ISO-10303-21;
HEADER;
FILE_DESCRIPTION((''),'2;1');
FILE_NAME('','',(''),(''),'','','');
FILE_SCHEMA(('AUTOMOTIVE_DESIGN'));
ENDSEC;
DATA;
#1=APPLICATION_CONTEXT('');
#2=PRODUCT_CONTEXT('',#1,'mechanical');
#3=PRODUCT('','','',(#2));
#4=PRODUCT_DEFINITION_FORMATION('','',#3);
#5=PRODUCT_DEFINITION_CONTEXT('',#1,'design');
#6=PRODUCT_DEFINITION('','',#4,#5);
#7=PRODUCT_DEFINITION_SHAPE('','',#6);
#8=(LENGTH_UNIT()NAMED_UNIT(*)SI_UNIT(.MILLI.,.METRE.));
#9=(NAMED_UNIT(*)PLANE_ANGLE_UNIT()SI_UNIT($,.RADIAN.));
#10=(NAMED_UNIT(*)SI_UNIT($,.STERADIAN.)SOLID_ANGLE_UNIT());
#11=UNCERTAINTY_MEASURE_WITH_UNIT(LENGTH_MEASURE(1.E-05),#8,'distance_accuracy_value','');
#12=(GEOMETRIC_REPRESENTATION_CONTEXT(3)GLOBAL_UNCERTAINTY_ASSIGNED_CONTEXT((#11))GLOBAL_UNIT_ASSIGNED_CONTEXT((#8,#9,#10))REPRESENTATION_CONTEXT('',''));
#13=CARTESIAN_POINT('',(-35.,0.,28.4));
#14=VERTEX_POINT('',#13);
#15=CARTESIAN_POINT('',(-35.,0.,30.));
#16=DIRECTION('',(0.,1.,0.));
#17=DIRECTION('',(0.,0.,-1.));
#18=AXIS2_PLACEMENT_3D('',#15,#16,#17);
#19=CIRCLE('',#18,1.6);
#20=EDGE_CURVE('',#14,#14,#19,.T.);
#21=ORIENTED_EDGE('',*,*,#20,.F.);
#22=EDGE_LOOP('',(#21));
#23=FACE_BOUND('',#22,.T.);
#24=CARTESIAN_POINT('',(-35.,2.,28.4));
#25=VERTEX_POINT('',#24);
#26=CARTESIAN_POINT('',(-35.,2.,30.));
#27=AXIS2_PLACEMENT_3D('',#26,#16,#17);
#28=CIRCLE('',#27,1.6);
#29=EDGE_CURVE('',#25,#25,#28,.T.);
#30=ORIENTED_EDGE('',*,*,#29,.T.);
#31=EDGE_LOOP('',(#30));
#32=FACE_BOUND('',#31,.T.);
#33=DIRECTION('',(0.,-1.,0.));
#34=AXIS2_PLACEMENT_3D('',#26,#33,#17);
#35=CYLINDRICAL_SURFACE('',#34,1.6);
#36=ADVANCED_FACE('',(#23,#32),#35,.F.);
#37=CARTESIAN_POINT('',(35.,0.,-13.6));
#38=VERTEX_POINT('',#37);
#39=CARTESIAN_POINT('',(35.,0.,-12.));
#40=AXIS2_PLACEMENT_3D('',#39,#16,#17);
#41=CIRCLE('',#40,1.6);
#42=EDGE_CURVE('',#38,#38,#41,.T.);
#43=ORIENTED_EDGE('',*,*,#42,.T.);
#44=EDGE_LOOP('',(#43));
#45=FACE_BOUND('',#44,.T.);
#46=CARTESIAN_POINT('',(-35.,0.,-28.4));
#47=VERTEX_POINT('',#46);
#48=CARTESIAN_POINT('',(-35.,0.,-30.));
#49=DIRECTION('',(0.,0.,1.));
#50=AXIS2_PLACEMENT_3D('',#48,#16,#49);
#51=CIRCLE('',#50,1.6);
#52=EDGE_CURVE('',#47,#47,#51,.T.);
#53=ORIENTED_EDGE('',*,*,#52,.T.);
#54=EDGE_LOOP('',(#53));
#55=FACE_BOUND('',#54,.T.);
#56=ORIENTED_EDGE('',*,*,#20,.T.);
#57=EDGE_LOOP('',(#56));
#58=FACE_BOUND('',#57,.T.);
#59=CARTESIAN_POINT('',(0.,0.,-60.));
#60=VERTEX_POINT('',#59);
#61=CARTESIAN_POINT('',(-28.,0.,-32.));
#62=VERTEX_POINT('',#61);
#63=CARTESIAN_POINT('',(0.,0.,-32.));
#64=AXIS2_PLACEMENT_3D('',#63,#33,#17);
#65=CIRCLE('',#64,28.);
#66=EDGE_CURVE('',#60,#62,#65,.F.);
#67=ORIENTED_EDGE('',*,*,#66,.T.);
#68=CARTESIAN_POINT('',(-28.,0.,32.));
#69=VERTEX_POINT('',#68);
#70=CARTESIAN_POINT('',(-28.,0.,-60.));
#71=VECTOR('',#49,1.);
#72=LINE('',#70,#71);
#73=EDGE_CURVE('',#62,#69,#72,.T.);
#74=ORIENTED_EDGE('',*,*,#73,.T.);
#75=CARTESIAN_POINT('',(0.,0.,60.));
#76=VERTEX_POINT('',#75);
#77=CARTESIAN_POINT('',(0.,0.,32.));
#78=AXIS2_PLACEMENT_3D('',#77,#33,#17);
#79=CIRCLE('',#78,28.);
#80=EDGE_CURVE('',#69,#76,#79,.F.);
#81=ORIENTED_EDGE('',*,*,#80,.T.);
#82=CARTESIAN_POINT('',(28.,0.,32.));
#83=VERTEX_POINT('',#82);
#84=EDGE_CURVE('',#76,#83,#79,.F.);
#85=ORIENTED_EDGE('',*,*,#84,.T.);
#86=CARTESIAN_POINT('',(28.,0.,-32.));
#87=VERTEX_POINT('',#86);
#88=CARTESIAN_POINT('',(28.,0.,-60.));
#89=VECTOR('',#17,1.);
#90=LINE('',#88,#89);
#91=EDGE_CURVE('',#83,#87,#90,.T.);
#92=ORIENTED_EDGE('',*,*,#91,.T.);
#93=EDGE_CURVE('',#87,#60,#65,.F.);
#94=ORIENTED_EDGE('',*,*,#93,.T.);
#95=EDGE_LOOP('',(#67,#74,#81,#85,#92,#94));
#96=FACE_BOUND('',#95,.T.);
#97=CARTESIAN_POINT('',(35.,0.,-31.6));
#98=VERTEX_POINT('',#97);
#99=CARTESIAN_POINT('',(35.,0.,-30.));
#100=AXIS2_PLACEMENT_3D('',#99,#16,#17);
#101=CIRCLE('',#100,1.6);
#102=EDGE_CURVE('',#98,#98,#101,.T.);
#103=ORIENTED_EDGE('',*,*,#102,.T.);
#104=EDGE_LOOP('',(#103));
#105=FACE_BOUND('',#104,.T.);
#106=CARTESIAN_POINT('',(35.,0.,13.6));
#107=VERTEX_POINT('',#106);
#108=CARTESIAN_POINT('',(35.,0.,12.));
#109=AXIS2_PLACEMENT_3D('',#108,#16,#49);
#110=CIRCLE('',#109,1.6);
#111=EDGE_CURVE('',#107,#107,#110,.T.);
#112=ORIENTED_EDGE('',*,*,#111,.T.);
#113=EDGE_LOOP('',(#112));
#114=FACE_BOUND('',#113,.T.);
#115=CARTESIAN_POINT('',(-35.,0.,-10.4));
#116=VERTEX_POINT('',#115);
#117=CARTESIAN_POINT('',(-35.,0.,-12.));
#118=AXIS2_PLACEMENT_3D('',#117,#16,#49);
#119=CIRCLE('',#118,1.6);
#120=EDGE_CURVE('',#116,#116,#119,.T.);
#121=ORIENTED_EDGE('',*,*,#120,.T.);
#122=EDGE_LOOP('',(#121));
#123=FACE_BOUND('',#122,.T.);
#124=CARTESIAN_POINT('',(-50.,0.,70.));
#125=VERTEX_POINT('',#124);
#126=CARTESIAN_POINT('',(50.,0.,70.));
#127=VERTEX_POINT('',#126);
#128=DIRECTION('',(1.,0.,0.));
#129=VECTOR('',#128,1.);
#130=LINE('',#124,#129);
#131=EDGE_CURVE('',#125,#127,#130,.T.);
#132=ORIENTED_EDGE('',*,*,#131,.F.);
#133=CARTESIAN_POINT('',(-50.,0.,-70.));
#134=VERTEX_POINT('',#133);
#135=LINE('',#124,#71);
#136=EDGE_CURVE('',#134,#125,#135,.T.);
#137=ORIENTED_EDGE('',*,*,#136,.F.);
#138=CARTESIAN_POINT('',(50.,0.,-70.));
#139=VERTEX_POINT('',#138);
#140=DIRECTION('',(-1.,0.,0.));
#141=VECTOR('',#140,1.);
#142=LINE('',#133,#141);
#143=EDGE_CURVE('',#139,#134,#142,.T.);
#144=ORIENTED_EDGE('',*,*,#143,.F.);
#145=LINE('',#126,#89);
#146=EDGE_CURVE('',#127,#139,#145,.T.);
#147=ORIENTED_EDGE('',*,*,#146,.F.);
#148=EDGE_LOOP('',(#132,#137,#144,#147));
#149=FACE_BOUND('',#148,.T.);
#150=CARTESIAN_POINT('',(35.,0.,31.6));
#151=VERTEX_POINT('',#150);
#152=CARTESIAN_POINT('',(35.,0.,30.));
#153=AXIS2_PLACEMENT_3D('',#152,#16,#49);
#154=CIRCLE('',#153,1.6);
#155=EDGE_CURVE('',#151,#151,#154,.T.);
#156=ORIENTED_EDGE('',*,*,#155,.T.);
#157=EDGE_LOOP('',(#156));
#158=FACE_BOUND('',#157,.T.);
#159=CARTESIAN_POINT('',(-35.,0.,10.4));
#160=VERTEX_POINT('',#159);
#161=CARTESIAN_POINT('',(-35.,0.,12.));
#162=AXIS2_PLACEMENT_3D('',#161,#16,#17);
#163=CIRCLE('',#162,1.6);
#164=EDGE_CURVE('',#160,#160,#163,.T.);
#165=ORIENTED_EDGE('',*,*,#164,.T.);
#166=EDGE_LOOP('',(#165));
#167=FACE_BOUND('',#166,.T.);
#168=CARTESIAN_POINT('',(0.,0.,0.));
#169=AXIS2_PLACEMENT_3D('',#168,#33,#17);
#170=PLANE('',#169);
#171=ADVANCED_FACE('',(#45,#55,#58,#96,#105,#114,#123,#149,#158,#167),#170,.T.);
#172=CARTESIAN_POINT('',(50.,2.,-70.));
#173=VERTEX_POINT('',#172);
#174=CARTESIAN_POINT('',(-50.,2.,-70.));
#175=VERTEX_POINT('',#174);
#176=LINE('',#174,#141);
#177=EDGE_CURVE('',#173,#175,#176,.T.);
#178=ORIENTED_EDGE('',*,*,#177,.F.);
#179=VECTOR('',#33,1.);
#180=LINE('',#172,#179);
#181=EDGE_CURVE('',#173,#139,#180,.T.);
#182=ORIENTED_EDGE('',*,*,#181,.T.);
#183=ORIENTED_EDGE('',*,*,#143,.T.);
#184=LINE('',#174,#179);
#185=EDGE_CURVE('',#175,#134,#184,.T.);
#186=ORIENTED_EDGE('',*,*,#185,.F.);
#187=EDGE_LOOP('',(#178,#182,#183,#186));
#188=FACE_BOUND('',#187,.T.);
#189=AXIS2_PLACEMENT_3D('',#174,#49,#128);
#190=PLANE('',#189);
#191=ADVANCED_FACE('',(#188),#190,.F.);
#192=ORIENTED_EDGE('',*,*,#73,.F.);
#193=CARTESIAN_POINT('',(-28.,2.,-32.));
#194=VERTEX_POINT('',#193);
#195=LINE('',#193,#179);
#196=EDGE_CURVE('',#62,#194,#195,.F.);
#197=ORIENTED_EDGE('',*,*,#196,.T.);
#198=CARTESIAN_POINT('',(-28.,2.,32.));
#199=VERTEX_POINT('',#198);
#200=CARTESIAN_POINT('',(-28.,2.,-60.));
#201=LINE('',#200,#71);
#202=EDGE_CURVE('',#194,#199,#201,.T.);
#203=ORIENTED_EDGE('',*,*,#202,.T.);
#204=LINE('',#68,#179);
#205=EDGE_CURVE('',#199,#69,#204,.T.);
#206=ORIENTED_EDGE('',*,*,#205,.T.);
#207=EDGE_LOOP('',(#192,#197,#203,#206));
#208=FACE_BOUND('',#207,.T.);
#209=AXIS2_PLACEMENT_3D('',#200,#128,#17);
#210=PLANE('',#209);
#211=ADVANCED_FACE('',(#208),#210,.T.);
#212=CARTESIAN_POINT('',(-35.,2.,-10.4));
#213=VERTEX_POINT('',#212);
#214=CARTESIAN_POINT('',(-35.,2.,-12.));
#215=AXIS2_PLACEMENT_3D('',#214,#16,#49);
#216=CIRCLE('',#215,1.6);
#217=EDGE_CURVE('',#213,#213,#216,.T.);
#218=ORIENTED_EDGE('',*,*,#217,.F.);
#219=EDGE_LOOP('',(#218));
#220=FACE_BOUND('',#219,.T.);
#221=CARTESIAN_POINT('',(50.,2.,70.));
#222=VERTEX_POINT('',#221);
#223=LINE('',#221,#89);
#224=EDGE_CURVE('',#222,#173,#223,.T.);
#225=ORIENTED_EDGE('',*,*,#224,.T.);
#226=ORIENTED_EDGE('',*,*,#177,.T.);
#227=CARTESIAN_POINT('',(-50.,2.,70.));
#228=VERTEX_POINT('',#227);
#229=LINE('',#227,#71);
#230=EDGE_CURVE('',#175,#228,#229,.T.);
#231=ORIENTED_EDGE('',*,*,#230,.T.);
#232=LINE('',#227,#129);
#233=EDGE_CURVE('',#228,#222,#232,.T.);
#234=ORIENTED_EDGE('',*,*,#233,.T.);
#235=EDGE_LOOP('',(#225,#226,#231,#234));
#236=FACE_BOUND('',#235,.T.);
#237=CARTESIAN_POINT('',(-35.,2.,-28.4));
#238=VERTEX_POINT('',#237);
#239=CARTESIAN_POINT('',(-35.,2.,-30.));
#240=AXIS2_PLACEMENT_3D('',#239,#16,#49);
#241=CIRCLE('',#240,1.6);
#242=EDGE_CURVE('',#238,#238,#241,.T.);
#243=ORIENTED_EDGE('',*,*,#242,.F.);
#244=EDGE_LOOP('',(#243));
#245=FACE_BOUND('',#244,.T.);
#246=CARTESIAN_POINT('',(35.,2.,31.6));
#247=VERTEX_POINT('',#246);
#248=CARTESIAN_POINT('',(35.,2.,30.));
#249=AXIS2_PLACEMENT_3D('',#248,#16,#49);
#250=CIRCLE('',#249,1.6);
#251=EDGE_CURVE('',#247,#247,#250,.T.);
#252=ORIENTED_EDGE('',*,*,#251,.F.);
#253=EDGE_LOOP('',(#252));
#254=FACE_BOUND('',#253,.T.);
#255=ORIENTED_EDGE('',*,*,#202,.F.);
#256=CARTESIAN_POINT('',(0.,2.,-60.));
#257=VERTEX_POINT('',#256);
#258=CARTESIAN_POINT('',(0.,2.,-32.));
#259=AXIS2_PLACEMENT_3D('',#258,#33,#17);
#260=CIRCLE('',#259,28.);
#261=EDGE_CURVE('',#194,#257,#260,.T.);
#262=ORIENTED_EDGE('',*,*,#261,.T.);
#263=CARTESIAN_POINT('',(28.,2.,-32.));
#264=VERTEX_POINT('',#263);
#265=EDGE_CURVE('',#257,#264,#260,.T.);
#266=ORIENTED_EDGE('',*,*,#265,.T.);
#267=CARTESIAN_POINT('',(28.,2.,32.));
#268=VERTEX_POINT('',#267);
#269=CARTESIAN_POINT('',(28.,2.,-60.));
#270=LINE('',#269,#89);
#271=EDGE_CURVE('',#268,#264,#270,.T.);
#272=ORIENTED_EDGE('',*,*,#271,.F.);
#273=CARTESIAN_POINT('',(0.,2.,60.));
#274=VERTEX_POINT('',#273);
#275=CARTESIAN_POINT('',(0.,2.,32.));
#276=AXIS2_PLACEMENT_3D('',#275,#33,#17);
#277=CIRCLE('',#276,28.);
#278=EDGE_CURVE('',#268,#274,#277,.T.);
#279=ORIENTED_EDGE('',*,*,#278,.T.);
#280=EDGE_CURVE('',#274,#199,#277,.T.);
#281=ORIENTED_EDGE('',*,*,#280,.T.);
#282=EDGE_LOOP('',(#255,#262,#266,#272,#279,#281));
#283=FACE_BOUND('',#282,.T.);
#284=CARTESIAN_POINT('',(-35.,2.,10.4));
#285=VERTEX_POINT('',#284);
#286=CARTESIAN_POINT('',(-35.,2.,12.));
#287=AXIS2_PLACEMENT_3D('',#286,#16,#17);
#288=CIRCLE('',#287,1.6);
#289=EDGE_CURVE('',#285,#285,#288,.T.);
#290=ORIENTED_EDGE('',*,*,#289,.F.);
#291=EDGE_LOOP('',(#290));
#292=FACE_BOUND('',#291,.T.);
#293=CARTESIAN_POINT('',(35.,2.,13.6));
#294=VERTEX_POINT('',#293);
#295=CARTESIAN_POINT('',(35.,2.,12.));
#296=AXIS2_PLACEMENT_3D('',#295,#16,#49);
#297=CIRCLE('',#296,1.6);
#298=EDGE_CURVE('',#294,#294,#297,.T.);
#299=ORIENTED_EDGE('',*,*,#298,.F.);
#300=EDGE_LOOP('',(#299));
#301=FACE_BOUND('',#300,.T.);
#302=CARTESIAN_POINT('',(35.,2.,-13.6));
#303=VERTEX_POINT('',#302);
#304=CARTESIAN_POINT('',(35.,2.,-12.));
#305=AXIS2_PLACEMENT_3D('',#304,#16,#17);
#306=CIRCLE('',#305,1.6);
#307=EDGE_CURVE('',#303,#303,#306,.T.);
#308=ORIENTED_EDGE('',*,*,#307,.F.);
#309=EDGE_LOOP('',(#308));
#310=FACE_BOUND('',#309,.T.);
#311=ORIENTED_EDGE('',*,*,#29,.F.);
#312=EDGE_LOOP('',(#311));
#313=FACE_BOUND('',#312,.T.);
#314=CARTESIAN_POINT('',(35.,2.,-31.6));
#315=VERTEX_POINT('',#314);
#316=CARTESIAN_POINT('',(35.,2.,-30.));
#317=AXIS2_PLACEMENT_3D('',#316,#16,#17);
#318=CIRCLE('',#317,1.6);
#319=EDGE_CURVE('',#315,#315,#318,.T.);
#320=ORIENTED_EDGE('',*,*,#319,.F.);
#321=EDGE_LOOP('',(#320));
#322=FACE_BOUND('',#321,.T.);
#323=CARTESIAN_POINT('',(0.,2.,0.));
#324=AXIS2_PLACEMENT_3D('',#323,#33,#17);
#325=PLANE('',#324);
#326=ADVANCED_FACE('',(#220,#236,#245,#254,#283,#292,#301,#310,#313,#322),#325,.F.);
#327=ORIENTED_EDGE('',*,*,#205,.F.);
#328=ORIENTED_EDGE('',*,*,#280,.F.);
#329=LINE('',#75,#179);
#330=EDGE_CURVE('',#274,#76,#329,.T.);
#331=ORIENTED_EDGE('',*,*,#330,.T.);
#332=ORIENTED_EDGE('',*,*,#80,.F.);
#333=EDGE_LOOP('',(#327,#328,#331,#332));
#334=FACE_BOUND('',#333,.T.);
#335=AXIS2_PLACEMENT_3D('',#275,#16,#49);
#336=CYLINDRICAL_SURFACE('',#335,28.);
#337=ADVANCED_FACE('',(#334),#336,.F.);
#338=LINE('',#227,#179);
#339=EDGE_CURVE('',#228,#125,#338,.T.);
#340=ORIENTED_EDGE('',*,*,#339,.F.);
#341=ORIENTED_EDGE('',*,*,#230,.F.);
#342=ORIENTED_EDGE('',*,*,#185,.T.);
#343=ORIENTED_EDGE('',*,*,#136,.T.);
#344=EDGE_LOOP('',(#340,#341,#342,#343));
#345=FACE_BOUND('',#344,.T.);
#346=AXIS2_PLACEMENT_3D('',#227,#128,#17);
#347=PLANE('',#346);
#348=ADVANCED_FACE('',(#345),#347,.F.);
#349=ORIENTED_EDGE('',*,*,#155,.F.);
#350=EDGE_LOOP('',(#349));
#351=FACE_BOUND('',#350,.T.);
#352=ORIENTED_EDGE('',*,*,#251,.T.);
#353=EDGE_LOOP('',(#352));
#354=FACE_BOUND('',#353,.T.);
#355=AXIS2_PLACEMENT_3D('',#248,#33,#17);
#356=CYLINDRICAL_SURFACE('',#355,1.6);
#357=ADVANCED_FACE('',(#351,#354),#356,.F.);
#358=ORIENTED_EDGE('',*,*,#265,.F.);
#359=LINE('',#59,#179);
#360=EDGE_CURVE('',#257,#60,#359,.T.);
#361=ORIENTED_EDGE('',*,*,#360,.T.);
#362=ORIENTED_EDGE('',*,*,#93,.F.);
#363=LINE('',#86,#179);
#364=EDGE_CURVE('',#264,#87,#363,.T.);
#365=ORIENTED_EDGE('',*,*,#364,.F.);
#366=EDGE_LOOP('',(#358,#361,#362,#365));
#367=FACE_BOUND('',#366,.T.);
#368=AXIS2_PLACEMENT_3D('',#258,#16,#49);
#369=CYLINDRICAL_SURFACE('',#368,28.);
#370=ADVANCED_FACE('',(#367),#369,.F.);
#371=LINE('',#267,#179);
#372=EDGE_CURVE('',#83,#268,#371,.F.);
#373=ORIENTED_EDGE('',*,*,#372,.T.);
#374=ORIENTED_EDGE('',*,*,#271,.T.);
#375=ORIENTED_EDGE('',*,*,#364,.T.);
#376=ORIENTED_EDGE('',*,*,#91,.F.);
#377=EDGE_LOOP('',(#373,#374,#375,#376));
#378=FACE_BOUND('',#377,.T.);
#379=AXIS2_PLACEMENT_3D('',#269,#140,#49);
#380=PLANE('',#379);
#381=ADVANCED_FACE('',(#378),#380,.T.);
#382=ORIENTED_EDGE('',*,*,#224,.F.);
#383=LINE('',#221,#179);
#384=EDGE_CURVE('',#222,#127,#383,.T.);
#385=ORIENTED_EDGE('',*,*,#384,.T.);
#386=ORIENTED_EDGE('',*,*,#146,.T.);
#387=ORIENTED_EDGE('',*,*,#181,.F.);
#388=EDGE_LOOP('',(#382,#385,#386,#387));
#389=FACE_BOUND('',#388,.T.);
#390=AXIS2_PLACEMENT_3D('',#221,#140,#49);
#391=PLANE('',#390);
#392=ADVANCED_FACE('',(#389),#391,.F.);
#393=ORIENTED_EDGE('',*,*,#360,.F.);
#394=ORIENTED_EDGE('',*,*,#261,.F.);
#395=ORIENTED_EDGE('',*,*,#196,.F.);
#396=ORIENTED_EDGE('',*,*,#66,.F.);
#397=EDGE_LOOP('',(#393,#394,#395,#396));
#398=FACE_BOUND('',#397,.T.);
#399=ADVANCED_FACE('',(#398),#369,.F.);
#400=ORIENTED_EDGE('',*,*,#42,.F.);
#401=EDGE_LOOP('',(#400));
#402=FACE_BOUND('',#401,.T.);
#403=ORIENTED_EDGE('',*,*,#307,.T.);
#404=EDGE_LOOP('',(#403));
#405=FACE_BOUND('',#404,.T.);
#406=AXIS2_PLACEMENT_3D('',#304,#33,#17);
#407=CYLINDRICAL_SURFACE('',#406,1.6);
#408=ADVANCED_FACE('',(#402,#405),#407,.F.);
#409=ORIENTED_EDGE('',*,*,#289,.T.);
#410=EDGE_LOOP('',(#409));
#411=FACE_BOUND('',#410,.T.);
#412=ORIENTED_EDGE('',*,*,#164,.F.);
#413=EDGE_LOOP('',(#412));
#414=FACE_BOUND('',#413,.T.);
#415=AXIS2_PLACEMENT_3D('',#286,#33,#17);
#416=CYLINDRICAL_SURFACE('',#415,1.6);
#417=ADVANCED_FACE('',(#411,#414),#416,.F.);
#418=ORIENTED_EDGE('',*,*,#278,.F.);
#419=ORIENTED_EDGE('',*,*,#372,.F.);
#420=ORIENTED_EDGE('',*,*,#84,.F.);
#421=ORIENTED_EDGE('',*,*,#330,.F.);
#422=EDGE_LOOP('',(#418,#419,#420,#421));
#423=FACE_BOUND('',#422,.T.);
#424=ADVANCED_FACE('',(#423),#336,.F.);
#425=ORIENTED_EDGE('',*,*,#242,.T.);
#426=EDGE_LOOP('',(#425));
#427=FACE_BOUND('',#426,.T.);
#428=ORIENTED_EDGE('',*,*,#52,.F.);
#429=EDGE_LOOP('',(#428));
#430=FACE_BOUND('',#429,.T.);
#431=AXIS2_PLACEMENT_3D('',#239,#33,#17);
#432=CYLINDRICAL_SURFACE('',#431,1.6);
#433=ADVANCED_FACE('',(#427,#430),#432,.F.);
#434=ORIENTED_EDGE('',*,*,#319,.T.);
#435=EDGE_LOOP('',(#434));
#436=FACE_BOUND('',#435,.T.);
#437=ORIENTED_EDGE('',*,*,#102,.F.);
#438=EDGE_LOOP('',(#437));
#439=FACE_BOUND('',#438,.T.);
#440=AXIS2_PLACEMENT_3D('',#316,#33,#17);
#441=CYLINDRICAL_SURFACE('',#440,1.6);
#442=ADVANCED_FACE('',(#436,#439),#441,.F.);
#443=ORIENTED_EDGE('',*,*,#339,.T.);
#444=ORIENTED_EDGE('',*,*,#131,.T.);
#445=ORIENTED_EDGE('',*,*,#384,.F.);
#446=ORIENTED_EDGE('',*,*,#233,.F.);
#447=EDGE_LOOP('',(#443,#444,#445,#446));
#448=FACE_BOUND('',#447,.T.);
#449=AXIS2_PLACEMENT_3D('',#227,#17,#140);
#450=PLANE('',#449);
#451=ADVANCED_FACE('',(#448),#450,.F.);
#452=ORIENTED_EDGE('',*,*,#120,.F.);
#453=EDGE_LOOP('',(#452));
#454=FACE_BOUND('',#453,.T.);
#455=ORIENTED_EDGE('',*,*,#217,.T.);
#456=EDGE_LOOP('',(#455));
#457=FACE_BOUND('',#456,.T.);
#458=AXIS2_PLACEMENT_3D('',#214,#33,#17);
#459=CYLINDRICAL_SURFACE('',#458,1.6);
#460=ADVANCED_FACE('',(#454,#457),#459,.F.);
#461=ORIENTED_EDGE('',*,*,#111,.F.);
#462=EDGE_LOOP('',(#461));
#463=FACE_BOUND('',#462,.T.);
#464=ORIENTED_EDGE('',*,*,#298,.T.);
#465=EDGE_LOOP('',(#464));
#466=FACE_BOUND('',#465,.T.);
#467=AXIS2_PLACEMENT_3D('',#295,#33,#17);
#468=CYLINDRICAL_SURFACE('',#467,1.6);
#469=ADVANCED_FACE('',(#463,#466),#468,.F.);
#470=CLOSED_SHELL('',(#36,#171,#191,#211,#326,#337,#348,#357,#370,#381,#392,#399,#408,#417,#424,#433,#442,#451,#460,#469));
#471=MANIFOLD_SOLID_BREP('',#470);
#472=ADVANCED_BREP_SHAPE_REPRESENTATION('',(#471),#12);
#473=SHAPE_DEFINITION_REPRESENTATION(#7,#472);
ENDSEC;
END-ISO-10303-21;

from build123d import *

# Parameters (mm, degrees)
SKETCH_1_W      = 100
SKETCH_1_H      = 140
SKETCH_1_R      = 1.6
SKETCH_1_W_2    = 56
SKETCH_1_H_2    = 120
EXTRUDE_1_DEPTH = 2
FILLET_1_R      = 28


with BuildPart() as part:
    # 草圖1 → 填料-伸長1 (new body)
    with BuildSketch(Plane(origin=(0, 0, 0), x_dir=(1, 0, 0), z_dir=(0, 1, 0))):
        Rectangle(SKETCH_1_W, SKETCH_1_H)
        with Locations(Location((-35, 30, 0), (0, 0, 270))):
            Circle(SKETCH_1_R, mode=Mode.SUBTRACT)
        with Locations(Location((35, 30, 0), (0, 0, 90))):
            Circle(SKETCH_1_R, mode=Mode.SUBTRACT)
        with Locations(Location((-35, 12, 0), (0, 0, 270))):
            Circle(SKETCH_1_R, mode=Mode.SUBTRACT)
        with Locations(Location((35, 12, 0), (0, 0, 90))):
            Circle(SKETCH_1_R, mode=Mode.SUBTRACT)
        with Locations(Location((35, -12, 0), (0, 0, 270))):
            Circle(SKETCH_1_R, mode=Mode.SUBTRACT)
        with Locations(Location((35, -30, 0), (0, 0, 270))):
            Circle(SKETCH_1_R, mode=Mode.SUBTRACT)
        with Locations(Location((-35, -30, 0), (0, 0, 90))):
            Circle(SKETCH_1_R, mode=Mode.SUBTRACT)
        with Locations(Location((-35, -12, 0), (0, 0, 90))):
            Circle(SKETCH_1_R, mode=Mode.SUBTRACT)
        Rectangle(SKETCH_1_W_2, SKETCH_1_H_2, mode=Mode.SUBTRACT)
    extrude(amount=EXTRUDE_1_DEPTH)

    # 圓角1
    fillet_1_edges = [part.edges().sort_by_distance(p)[0] for p in [
        (28, 1, -60),
        (-28, 1, -60),
        (-28, 1, 60),
        (28, 1, 60),
    ]]
    fillet(fillet_1_edges, radius=FILLET_1_R - 0.0001)  # a hair under: the kernel refuses the full size


solid = part.part
